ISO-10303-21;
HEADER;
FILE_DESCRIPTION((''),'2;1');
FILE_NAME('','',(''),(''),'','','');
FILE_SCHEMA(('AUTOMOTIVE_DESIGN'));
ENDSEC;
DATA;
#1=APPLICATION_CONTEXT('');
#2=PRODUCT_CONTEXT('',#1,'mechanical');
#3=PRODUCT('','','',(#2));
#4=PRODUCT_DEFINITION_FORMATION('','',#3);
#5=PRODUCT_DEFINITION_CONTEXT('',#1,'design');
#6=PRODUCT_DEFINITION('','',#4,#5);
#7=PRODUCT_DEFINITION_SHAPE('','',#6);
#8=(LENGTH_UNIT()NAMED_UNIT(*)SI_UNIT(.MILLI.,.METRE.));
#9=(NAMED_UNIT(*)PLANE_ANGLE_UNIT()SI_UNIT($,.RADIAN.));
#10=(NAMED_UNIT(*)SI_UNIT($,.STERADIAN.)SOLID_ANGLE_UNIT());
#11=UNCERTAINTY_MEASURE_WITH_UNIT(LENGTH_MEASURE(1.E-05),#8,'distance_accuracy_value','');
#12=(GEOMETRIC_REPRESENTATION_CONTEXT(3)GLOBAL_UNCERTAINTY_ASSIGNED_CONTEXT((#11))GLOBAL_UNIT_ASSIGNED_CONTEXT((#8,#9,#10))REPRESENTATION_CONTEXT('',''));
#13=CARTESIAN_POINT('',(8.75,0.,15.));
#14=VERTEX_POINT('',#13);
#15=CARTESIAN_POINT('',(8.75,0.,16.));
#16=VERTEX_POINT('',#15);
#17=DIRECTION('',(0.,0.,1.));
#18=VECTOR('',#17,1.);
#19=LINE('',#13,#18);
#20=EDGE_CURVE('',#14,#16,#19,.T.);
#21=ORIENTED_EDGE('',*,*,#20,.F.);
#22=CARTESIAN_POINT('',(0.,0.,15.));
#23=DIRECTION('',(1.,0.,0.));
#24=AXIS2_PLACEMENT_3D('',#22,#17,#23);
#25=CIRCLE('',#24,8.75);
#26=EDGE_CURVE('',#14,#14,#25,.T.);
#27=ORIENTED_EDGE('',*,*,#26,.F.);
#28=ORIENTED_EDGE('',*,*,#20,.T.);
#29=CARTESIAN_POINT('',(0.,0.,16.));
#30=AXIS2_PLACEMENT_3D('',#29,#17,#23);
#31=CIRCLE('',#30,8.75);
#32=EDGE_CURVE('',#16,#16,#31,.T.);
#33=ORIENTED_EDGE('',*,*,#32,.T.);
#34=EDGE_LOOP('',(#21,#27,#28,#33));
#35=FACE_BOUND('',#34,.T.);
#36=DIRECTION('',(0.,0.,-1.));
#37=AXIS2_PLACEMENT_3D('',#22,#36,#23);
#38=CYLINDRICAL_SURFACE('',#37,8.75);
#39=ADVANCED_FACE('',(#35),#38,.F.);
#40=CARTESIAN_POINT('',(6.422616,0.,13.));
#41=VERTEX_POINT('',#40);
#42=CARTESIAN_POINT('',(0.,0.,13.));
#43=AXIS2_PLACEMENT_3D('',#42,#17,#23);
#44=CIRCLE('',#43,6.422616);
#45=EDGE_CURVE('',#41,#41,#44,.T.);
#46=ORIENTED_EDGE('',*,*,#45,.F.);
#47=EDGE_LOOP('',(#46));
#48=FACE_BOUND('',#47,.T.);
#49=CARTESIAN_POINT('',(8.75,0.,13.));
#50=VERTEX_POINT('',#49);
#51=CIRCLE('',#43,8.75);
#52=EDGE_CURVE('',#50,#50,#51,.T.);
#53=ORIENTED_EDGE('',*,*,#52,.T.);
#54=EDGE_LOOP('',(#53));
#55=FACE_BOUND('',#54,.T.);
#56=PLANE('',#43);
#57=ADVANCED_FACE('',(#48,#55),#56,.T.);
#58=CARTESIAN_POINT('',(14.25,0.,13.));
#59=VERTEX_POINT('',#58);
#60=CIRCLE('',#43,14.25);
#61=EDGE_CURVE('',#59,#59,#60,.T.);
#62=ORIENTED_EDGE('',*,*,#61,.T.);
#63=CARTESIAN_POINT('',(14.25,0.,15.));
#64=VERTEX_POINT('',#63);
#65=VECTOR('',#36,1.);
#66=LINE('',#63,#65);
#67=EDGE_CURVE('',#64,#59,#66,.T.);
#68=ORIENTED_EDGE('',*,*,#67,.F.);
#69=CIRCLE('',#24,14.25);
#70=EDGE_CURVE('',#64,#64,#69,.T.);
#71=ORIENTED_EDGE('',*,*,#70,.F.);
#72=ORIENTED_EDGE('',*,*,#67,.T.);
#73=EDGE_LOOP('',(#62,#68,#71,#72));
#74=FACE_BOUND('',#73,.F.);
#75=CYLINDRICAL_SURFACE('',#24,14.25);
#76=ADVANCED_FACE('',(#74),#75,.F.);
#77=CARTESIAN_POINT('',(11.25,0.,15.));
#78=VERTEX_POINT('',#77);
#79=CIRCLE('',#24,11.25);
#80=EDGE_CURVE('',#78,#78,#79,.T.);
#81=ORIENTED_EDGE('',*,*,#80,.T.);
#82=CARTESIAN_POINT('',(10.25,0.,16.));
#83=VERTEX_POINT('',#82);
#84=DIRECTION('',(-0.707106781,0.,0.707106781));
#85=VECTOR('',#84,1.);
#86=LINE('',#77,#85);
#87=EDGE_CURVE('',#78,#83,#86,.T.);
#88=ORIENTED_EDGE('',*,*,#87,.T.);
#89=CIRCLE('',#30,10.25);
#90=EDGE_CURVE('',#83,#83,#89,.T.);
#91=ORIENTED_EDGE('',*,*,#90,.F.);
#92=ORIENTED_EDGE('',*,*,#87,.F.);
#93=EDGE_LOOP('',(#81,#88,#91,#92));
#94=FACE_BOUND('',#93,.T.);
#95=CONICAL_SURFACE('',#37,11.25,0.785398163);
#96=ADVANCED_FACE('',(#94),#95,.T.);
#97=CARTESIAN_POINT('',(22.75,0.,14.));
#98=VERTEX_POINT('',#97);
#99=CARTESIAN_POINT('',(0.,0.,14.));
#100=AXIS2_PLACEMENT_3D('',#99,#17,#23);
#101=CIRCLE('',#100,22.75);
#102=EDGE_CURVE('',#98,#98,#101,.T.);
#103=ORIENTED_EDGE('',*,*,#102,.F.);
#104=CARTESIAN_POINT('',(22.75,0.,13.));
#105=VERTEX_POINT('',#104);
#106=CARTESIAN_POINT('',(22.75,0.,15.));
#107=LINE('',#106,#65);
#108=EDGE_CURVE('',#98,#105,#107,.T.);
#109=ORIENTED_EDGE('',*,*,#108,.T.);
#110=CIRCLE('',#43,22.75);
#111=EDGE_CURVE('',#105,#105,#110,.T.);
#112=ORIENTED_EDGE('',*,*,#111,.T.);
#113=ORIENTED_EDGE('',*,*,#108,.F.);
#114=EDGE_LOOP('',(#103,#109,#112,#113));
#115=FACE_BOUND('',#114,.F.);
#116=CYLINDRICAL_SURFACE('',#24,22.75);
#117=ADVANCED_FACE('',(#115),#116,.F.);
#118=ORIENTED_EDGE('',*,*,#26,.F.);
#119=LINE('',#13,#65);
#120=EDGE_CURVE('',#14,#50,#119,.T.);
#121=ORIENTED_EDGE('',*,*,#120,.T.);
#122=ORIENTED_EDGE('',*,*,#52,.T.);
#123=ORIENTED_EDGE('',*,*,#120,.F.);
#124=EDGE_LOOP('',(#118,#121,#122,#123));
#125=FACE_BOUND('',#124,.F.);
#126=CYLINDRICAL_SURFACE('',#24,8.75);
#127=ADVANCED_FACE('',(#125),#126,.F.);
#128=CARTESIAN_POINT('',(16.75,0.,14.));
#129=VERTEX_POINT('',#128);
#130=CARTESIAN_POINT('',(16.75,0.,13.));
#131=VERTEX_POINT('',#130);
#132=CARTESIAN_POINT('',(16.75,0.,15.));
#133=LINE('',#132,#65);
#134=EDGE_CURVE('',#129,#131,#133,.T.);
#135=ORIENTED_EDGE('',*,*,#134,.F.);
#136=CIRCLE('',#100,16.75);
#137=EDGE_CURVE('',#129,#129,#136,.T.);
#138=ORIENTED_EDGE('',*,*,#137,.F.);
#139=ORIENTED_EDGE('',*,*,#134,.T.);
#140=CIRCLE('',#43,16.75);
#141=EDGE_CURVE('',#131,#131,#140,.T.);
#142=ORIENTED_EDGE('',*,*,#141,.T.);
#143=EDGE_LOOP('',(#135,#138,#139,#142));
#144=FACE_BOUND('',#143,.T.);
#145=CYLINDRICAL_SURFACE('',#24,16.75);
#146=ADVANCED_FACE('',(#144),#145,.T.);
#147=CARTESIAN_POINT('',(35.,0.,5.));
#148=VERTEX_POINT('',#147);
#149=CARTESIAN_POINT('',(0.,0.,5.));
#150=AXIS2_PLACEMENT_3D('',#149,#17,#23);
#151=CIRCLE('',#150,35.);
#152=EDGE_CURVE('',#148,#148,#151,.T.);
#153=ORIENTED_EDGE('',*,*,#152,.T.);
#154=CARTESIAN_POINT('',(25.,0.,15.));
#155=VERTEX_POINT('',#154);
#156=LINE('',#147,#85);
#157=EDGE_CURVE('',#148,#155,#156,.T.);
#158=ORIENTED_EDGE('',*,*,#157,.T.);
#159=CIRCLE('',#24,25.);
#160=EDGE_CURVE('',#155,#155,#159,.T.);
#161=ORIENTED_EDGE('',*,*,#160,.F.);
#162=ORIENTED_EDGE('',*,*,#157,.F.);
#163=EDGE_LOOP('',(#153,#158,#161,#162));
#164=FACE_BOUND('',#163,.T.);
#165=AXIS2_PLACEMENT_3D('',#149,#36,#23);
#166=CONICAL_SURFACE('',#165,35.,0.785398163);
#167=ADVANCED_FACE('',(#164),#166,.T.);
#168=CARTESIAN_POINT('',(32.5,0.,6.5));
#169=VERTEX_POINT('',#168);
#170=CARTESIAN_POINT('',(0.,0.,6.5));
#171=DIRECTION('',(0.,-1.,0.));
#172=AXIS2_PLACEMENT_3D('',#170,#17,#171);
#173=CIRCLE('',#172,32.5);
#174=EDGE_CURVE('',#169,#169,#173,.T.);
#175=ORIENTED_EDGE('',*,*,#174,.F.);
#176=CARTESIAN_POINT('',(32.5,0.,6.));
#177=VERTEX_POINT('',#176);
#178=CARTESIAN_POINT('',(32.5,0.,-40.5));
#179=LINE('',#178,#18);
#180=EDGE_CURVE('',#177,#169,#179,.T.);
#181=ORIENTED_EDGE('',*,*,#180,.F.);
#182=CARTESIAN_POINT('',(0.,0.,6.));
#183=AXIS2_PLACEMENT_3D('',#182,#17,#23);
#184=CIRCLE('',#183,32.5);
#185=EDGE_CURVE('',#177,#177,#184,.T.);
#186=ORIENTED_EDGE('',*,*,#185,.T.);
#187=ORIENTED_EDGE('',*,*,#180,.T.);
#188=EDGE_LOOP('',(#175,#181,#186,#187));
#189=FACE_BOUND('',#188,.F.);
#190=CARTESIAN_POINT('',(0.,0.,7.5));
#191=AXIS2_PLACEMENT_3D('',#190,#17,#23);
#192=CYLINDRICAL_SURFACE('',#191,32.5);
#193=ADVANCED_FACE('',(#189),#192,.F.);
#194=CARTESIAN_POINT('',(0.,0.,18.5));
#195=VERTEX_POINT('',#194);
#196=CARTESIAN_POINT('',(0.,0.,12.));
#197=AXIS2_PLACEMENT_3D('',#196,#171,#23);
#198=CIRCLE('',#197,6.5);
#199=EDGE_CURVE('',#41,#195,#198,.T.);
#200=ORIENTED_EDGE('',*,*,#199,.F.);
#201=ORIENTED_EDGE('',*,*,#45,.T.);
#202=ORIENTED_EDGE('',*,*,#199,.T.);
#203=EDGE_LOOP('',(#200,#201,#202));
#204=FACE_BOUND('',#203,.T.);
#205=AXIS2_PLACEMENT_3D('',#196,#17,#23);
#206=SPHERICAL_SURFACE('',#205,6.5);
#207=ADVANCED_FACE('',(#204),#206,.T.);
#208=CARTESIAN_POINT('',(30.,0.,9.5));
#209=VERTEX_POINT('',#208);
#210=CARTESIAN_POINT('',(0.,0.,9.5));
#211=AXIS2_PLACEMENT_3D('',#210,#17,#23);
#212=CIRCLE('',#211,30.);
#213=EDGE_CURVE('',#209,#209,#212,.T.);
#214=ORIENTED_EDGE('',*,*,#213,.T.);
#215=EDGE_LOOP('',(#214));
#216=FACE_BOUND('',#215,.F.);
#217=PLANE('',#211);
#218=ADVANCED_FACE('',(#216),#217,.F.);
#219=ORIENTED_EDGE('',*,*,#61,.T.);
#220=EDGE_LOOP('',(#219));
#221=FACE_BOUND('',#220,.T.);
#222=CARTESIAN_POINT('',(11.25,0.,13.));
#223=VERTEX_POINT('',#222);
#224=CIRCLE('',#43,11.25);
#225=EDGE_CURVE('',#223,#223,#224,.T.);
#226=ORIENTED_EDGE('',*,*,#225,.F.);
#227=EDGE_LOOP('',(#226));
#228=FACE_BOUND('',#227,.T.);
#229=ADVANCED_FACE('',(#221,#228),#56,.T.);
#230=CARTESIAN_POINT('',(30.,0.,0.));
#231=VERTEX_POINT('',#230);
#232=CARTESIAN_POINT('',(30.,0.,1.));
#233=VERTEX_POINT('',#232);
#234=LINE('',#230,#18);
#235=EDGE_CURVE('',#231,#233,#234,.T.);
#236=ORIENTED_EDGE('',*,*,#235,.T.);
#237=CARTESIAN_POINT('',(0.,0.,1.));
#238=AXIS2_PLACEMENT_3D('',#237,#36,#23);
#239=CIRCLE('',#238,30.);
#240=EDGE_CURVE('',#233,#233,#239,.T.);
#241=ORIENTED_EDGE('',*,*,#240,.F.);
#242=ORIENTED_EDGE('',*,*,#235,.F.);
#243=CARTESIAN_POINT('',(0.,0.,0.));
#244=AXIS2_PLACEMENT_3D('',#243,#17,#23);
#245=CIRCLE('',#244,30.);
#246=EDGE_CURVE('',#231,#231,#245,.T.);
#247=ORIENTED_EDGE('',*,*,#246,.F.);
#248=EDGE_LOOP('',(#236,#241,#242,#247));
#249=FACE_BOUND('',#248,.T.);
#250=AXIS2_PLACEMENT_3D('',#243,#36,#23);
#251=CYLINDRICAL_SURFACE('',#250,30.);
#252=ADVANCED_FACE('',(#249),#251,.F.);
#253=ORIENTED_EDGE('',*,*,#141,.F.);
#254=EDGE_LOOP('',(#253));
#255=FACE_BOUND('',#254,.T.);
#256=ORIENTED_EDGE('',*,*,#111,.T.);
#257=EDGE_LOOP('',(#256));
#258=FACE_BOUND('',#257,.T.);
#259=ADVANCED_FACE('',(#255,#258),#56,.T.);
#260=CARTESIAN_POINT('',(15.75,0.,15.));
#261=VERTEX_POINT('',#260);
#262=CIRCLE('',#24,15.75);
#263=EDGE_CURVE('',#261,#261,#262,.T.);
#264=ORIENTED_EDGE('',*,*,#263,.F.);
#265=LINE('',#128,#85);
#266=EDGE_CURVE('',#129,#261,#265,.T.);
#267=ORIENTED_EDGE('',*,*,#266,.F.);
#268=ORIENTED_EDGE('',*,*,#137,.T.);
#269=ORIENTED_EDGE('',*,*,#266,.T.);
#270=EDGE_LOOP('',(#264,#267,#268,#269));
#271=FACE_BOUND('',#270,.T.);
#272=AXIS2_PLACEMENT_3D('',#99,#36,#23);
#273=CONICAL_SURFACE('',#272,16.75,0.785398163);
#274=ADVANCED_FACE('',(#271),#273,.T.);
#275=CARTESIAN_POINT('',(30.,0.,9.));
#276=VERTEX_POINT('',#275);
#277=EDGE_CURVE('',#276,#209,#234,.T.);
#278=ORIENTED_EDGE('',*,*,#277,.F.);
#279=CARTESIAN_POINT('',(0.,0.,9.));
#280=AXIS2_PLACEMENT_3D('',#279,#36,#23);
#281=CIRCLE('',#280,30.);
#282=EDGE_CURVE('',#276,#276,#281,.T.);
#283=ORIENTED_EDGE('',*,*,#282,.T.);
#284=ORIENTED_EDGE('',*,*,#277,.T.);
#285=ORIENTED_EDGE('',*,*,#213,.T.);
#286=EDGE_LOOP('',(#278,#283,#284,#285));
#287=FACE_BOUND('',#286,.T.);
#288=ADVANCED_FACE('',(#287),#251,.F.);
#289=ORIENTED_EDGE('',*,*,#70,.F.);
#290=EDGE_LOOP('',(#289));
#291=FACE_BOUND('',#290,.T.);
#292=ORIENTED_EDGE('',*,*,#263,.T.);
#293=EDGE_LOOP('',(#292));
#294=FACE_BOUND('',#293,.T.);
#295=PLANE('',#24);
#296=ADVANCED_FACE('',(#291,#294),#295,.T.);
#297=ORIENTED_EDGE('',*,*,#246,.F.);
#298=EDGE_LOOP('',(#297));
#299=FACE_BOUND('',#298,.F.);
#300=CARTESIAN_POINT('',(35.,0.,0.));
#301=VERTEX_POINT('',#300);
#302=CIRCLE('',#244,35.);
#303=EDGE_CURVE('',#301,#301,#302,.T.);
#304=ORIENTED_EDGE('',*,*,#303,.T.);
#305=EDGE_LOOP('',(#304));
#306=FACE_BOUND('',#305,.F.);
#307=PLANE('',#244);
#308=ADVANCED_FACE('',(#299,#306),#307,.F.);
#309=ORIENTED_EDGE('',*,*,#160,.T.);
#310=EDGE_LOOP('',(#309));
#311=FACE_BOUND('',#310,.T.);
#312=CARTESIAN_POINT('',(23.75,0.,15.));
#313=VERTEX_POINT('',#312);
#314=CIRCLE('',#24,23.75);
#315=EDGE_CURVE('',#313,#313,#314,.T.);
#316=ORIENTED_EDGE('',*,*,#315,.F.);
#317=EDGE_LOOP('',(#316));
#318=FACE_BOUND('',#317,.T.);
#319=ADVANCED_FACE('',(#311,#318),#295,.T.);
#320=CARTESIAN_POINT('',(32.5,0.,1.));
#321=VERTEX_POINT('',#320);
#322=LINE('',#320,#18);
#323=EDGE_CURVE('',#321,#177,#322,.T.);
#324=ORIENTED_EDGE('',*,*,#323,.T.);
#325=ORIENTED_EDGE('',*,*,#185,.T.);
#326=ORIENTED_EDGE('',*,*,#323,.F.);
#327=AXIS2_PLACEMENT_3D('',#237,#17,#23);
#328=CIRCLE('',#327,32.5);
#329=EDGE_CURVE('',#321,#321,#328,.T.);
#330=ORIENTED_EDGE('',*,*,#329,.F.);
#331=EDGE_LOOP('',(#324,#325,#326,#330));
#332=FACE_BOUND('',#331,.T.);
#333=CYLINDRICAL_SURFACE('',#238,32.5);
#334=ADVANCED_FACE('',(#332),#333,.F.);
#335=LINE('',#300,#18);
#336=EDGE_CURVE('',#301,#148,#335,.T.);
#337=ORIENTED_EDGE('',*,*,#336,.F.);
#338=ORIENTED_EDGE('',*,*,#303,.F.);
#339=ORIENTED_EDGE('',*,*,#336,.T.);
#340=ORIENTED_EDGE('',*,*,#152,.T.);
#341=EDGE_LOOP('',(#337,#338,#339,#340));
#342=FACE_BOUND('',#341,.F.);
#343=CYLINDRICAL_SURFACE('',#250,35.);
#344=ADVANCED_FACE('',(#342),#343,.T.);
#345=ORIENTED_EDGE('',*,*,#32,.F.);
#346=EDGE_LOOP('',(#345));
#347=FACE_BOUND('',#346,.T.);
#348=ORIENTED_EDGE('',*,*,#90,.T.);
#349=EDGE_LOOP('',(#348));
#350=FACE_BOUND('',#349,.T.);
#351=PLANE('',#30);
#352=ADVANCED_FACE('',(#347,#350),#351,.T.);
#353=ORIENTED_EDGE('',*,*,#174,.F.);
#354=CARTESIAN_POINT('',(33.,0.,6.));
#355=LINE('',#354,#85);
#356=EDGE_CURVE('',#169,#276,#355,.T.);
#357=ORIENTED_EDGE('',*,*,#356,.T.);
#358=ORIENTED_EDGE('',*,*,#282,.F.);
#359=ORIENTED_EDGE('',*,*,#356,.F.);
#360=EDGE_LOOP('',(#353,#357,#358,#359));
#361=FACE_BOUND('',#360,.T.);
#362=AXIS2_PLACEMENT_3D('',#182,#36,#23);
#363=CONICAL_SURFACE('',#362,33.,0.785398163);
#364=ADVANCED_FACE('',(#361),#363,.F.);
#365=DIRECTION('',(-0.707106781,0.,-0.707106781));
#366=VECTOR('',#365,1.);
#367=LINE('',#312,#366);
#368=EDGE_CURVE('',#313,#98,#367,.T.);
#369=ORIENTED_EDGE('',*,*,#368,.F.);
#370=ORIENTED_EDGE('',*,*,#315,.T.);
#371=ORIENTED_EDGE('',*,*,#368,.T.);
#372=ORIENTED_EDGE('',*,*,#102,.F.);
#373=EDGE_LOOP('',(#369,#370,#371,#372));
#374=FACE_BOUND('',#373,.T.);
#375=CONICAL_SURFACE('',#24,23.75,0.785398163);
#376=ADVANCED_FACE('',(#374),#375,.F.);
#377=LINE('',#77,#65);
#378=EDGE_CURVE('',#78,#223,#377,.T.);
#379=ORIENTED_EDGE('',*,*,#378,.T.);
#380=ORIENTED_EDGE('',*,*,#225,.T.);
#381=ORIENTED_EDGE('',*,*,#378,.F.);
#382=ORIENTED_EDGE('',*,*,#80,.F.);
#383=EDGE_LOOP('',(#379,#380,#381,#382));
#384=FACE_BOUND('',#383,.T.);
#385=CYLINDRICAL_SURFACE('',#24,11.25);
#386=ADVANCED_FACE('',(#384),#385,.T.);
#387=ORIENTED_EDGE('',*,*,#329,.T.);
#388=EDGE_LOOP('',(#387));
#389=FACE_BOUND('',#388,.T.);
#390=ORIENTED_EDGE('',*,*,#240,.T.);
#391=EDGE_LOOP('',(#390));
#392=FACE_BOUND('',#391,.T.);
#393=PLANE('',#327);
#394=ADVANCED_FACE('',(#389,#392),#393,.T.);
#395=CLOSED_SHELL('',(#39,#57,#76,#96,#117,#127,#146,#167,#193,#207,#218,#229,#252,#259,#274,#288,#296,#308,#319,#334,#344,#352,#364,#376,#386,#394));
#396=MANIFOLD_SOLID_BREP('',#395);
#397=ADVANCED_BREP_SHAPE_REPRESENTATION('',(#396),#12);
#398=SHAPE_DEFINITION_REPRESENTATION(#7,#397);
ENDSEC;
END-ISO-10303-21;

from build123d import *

# Parameters (mm, degrees)
F0_R         = 35
F1_DEPTH     = 15
F2_SIZE      = 10
F4_R         = 22.75
F4_R_2       = 16.75
F5_DEPTH     = 2
F4_R_3       = 14.25
F4_R_4       = 11.25
F6_DEPTH     = 2
F4_R_5       = 8.75
F7_DEPTH     = 2
F8_DEPTH     = 1
F12_R        = 30
F13_DEPTH    = 9.5
F15_R        = 32.5
F16_DEPTH    = 5
F17_S5_R     = 32.5
F17_T6_DEPTH = 48


# Not quite as in the source:
# - a fillet or chamfer that OpenCascade refuses, or shapes differently, is made with other operations: its cross-section is extruded or revolved along the edge and cut away or added


with BuildPart() as f1:
    # F0 (on Top) → F1 (new body)
    with BuildSketch(Plane.XY):
        Circle(F0_R)
    extrude(amount=F1_DEPTH)

    # F2
    f2_edges = [f1.edges().sort_by_distance(p)[0] for p in [
        (-35, 0, 15),
    ]]
    chamfer(f2_edges, length=F2_SIZE)

    # F4 (on offset) → F5 (cut)
    with BuildSketch(Plane.XY.offset(15)):
        Circle(F4_R)
        Circle(F4_R_2, mode=Mode.SUBTRACT)
    extrude(amount=-F5_DEPTH, mode=Mode.SUBTRACT)

    # F4 (on offset) → F6 (cut)
    with BuildSketch(Plane.XY.offset(15)):
        Circle(F4_R_3)
        Circle(F4_R_4, mode=Mode.SUBTRACT)
    extrude(amount=-F6_DEPTH, mode=Mode.SUBTRACT)

    # F4 (on offset) → F7 (cut)
    with BuildSketch(Plane.XY.offset(15)):
        Circle(F4_R_5)
    extrude(amount=-F7_DEPTH, mode=Mode.SUBTRACT)

    # F4 (on offset) → F8 (join)
    with BuildSketch(Plane.XY.offset(15)):
        Circle(F4_R_4)
        Circle(F4_R_5, mode=Mode.SUBTRACT)
    extrude(amount=F8_DEPTH)

    # F9 (on Front) → F10 (revolve)
    with BuildSketch(Plane.XZ):
        with BuildLine():
            Line((0, 12), (0, 5.5))
            ThreePointArc((0, 5.5), (4.5961940777, 7.4038059223), (6.5, 12))
            Line((6.5, 12), (0, 12))
        make_face()
        with BuildLine():
            Line((0, 18.5), (0, 12))
            Line((0, 12), (6.5, 12))
            ThreePointArc((6.5, 12), (4.5961940777, 16.5961940777), (0, 18.5))
        make_face()
    revolve(axis=Axis((0, 0, 6), (0, 0, 1)))

    # F11: chamfer of 1 on 3 edges, made by hand

    # F11_s1 → F11_t2 (revolve, cut)
    with BuildSketch(Plane.XZ):
        Polygon((23.75, 15), (22.75, 14), (22.75, 15), align=None)
    revolve(axis=Axis((0, 0, 15), (0, 0, 1)), mode=Mode.SUBTRACT)

    # F11_s3 → F11_t4 (revolve, cut)
    with BuildSketch(Plane.XZ):
        Polygon((16.75, 14), (15.75, 15), (16.75, 15), align=None)
    revolve(axis=Axis((0, 0, 15), (0, 0, 1)), mode=Mode.SUBTRACT)

    # F11_s5 → F11_t6 (revolve, cut)
    with BuildSketch(Plane.XZ):
        Polygon((11.25, 15), (10.25, 16), (11.25, 16), align=None)
    revolve(axis=Axis((0, 0, 16), (0, 0, 1)), mode=Mode.SUBTRACT)

    # F12 (on Top) → F13 (cut)
    with BuildSketch(Plane.XY):
        Circle(F12_R)
    extrude(amount=F13_DEPTH, mode=Mode.SUBTRACT)

    # F15 (on offset) → F16 (cut)
    with BuildSketch(Plane.XY.offset(1)):
        Circle(F15_R)
    extrude(amount=F16_DEPTH, mode=Mode.SUBTRACT)

    # F17: chamfer of 3 on 1 edges, made by hand


with BuildPart() as f17_tool2:
    # F17_s3 → F17_t4 (revolve)
    with BuildSketch(Plane.XZ):
        Polygon((33, 6), (30, 9), (30, 6), align=None)
    revolve(axis=Axis((0, 0, 6), (0, 0, -1)))

    # F17_s5 → F17_t6 (intersect, symmetric)
    with BuildSketch(Plane.XY.offset(7.5)):
        Circle(F17_S5_R)
    extrude(amount=F17_T6_DEPTH, both=True, mode=Mode.INTERSECT)


with BuildPart() as f1_1:
    add(f1.part)

    # F17_t1: cut F17_tool2
    add(f17_tool2.part, mode=Mode.SUBTRACT)


solid = f1_1.part
